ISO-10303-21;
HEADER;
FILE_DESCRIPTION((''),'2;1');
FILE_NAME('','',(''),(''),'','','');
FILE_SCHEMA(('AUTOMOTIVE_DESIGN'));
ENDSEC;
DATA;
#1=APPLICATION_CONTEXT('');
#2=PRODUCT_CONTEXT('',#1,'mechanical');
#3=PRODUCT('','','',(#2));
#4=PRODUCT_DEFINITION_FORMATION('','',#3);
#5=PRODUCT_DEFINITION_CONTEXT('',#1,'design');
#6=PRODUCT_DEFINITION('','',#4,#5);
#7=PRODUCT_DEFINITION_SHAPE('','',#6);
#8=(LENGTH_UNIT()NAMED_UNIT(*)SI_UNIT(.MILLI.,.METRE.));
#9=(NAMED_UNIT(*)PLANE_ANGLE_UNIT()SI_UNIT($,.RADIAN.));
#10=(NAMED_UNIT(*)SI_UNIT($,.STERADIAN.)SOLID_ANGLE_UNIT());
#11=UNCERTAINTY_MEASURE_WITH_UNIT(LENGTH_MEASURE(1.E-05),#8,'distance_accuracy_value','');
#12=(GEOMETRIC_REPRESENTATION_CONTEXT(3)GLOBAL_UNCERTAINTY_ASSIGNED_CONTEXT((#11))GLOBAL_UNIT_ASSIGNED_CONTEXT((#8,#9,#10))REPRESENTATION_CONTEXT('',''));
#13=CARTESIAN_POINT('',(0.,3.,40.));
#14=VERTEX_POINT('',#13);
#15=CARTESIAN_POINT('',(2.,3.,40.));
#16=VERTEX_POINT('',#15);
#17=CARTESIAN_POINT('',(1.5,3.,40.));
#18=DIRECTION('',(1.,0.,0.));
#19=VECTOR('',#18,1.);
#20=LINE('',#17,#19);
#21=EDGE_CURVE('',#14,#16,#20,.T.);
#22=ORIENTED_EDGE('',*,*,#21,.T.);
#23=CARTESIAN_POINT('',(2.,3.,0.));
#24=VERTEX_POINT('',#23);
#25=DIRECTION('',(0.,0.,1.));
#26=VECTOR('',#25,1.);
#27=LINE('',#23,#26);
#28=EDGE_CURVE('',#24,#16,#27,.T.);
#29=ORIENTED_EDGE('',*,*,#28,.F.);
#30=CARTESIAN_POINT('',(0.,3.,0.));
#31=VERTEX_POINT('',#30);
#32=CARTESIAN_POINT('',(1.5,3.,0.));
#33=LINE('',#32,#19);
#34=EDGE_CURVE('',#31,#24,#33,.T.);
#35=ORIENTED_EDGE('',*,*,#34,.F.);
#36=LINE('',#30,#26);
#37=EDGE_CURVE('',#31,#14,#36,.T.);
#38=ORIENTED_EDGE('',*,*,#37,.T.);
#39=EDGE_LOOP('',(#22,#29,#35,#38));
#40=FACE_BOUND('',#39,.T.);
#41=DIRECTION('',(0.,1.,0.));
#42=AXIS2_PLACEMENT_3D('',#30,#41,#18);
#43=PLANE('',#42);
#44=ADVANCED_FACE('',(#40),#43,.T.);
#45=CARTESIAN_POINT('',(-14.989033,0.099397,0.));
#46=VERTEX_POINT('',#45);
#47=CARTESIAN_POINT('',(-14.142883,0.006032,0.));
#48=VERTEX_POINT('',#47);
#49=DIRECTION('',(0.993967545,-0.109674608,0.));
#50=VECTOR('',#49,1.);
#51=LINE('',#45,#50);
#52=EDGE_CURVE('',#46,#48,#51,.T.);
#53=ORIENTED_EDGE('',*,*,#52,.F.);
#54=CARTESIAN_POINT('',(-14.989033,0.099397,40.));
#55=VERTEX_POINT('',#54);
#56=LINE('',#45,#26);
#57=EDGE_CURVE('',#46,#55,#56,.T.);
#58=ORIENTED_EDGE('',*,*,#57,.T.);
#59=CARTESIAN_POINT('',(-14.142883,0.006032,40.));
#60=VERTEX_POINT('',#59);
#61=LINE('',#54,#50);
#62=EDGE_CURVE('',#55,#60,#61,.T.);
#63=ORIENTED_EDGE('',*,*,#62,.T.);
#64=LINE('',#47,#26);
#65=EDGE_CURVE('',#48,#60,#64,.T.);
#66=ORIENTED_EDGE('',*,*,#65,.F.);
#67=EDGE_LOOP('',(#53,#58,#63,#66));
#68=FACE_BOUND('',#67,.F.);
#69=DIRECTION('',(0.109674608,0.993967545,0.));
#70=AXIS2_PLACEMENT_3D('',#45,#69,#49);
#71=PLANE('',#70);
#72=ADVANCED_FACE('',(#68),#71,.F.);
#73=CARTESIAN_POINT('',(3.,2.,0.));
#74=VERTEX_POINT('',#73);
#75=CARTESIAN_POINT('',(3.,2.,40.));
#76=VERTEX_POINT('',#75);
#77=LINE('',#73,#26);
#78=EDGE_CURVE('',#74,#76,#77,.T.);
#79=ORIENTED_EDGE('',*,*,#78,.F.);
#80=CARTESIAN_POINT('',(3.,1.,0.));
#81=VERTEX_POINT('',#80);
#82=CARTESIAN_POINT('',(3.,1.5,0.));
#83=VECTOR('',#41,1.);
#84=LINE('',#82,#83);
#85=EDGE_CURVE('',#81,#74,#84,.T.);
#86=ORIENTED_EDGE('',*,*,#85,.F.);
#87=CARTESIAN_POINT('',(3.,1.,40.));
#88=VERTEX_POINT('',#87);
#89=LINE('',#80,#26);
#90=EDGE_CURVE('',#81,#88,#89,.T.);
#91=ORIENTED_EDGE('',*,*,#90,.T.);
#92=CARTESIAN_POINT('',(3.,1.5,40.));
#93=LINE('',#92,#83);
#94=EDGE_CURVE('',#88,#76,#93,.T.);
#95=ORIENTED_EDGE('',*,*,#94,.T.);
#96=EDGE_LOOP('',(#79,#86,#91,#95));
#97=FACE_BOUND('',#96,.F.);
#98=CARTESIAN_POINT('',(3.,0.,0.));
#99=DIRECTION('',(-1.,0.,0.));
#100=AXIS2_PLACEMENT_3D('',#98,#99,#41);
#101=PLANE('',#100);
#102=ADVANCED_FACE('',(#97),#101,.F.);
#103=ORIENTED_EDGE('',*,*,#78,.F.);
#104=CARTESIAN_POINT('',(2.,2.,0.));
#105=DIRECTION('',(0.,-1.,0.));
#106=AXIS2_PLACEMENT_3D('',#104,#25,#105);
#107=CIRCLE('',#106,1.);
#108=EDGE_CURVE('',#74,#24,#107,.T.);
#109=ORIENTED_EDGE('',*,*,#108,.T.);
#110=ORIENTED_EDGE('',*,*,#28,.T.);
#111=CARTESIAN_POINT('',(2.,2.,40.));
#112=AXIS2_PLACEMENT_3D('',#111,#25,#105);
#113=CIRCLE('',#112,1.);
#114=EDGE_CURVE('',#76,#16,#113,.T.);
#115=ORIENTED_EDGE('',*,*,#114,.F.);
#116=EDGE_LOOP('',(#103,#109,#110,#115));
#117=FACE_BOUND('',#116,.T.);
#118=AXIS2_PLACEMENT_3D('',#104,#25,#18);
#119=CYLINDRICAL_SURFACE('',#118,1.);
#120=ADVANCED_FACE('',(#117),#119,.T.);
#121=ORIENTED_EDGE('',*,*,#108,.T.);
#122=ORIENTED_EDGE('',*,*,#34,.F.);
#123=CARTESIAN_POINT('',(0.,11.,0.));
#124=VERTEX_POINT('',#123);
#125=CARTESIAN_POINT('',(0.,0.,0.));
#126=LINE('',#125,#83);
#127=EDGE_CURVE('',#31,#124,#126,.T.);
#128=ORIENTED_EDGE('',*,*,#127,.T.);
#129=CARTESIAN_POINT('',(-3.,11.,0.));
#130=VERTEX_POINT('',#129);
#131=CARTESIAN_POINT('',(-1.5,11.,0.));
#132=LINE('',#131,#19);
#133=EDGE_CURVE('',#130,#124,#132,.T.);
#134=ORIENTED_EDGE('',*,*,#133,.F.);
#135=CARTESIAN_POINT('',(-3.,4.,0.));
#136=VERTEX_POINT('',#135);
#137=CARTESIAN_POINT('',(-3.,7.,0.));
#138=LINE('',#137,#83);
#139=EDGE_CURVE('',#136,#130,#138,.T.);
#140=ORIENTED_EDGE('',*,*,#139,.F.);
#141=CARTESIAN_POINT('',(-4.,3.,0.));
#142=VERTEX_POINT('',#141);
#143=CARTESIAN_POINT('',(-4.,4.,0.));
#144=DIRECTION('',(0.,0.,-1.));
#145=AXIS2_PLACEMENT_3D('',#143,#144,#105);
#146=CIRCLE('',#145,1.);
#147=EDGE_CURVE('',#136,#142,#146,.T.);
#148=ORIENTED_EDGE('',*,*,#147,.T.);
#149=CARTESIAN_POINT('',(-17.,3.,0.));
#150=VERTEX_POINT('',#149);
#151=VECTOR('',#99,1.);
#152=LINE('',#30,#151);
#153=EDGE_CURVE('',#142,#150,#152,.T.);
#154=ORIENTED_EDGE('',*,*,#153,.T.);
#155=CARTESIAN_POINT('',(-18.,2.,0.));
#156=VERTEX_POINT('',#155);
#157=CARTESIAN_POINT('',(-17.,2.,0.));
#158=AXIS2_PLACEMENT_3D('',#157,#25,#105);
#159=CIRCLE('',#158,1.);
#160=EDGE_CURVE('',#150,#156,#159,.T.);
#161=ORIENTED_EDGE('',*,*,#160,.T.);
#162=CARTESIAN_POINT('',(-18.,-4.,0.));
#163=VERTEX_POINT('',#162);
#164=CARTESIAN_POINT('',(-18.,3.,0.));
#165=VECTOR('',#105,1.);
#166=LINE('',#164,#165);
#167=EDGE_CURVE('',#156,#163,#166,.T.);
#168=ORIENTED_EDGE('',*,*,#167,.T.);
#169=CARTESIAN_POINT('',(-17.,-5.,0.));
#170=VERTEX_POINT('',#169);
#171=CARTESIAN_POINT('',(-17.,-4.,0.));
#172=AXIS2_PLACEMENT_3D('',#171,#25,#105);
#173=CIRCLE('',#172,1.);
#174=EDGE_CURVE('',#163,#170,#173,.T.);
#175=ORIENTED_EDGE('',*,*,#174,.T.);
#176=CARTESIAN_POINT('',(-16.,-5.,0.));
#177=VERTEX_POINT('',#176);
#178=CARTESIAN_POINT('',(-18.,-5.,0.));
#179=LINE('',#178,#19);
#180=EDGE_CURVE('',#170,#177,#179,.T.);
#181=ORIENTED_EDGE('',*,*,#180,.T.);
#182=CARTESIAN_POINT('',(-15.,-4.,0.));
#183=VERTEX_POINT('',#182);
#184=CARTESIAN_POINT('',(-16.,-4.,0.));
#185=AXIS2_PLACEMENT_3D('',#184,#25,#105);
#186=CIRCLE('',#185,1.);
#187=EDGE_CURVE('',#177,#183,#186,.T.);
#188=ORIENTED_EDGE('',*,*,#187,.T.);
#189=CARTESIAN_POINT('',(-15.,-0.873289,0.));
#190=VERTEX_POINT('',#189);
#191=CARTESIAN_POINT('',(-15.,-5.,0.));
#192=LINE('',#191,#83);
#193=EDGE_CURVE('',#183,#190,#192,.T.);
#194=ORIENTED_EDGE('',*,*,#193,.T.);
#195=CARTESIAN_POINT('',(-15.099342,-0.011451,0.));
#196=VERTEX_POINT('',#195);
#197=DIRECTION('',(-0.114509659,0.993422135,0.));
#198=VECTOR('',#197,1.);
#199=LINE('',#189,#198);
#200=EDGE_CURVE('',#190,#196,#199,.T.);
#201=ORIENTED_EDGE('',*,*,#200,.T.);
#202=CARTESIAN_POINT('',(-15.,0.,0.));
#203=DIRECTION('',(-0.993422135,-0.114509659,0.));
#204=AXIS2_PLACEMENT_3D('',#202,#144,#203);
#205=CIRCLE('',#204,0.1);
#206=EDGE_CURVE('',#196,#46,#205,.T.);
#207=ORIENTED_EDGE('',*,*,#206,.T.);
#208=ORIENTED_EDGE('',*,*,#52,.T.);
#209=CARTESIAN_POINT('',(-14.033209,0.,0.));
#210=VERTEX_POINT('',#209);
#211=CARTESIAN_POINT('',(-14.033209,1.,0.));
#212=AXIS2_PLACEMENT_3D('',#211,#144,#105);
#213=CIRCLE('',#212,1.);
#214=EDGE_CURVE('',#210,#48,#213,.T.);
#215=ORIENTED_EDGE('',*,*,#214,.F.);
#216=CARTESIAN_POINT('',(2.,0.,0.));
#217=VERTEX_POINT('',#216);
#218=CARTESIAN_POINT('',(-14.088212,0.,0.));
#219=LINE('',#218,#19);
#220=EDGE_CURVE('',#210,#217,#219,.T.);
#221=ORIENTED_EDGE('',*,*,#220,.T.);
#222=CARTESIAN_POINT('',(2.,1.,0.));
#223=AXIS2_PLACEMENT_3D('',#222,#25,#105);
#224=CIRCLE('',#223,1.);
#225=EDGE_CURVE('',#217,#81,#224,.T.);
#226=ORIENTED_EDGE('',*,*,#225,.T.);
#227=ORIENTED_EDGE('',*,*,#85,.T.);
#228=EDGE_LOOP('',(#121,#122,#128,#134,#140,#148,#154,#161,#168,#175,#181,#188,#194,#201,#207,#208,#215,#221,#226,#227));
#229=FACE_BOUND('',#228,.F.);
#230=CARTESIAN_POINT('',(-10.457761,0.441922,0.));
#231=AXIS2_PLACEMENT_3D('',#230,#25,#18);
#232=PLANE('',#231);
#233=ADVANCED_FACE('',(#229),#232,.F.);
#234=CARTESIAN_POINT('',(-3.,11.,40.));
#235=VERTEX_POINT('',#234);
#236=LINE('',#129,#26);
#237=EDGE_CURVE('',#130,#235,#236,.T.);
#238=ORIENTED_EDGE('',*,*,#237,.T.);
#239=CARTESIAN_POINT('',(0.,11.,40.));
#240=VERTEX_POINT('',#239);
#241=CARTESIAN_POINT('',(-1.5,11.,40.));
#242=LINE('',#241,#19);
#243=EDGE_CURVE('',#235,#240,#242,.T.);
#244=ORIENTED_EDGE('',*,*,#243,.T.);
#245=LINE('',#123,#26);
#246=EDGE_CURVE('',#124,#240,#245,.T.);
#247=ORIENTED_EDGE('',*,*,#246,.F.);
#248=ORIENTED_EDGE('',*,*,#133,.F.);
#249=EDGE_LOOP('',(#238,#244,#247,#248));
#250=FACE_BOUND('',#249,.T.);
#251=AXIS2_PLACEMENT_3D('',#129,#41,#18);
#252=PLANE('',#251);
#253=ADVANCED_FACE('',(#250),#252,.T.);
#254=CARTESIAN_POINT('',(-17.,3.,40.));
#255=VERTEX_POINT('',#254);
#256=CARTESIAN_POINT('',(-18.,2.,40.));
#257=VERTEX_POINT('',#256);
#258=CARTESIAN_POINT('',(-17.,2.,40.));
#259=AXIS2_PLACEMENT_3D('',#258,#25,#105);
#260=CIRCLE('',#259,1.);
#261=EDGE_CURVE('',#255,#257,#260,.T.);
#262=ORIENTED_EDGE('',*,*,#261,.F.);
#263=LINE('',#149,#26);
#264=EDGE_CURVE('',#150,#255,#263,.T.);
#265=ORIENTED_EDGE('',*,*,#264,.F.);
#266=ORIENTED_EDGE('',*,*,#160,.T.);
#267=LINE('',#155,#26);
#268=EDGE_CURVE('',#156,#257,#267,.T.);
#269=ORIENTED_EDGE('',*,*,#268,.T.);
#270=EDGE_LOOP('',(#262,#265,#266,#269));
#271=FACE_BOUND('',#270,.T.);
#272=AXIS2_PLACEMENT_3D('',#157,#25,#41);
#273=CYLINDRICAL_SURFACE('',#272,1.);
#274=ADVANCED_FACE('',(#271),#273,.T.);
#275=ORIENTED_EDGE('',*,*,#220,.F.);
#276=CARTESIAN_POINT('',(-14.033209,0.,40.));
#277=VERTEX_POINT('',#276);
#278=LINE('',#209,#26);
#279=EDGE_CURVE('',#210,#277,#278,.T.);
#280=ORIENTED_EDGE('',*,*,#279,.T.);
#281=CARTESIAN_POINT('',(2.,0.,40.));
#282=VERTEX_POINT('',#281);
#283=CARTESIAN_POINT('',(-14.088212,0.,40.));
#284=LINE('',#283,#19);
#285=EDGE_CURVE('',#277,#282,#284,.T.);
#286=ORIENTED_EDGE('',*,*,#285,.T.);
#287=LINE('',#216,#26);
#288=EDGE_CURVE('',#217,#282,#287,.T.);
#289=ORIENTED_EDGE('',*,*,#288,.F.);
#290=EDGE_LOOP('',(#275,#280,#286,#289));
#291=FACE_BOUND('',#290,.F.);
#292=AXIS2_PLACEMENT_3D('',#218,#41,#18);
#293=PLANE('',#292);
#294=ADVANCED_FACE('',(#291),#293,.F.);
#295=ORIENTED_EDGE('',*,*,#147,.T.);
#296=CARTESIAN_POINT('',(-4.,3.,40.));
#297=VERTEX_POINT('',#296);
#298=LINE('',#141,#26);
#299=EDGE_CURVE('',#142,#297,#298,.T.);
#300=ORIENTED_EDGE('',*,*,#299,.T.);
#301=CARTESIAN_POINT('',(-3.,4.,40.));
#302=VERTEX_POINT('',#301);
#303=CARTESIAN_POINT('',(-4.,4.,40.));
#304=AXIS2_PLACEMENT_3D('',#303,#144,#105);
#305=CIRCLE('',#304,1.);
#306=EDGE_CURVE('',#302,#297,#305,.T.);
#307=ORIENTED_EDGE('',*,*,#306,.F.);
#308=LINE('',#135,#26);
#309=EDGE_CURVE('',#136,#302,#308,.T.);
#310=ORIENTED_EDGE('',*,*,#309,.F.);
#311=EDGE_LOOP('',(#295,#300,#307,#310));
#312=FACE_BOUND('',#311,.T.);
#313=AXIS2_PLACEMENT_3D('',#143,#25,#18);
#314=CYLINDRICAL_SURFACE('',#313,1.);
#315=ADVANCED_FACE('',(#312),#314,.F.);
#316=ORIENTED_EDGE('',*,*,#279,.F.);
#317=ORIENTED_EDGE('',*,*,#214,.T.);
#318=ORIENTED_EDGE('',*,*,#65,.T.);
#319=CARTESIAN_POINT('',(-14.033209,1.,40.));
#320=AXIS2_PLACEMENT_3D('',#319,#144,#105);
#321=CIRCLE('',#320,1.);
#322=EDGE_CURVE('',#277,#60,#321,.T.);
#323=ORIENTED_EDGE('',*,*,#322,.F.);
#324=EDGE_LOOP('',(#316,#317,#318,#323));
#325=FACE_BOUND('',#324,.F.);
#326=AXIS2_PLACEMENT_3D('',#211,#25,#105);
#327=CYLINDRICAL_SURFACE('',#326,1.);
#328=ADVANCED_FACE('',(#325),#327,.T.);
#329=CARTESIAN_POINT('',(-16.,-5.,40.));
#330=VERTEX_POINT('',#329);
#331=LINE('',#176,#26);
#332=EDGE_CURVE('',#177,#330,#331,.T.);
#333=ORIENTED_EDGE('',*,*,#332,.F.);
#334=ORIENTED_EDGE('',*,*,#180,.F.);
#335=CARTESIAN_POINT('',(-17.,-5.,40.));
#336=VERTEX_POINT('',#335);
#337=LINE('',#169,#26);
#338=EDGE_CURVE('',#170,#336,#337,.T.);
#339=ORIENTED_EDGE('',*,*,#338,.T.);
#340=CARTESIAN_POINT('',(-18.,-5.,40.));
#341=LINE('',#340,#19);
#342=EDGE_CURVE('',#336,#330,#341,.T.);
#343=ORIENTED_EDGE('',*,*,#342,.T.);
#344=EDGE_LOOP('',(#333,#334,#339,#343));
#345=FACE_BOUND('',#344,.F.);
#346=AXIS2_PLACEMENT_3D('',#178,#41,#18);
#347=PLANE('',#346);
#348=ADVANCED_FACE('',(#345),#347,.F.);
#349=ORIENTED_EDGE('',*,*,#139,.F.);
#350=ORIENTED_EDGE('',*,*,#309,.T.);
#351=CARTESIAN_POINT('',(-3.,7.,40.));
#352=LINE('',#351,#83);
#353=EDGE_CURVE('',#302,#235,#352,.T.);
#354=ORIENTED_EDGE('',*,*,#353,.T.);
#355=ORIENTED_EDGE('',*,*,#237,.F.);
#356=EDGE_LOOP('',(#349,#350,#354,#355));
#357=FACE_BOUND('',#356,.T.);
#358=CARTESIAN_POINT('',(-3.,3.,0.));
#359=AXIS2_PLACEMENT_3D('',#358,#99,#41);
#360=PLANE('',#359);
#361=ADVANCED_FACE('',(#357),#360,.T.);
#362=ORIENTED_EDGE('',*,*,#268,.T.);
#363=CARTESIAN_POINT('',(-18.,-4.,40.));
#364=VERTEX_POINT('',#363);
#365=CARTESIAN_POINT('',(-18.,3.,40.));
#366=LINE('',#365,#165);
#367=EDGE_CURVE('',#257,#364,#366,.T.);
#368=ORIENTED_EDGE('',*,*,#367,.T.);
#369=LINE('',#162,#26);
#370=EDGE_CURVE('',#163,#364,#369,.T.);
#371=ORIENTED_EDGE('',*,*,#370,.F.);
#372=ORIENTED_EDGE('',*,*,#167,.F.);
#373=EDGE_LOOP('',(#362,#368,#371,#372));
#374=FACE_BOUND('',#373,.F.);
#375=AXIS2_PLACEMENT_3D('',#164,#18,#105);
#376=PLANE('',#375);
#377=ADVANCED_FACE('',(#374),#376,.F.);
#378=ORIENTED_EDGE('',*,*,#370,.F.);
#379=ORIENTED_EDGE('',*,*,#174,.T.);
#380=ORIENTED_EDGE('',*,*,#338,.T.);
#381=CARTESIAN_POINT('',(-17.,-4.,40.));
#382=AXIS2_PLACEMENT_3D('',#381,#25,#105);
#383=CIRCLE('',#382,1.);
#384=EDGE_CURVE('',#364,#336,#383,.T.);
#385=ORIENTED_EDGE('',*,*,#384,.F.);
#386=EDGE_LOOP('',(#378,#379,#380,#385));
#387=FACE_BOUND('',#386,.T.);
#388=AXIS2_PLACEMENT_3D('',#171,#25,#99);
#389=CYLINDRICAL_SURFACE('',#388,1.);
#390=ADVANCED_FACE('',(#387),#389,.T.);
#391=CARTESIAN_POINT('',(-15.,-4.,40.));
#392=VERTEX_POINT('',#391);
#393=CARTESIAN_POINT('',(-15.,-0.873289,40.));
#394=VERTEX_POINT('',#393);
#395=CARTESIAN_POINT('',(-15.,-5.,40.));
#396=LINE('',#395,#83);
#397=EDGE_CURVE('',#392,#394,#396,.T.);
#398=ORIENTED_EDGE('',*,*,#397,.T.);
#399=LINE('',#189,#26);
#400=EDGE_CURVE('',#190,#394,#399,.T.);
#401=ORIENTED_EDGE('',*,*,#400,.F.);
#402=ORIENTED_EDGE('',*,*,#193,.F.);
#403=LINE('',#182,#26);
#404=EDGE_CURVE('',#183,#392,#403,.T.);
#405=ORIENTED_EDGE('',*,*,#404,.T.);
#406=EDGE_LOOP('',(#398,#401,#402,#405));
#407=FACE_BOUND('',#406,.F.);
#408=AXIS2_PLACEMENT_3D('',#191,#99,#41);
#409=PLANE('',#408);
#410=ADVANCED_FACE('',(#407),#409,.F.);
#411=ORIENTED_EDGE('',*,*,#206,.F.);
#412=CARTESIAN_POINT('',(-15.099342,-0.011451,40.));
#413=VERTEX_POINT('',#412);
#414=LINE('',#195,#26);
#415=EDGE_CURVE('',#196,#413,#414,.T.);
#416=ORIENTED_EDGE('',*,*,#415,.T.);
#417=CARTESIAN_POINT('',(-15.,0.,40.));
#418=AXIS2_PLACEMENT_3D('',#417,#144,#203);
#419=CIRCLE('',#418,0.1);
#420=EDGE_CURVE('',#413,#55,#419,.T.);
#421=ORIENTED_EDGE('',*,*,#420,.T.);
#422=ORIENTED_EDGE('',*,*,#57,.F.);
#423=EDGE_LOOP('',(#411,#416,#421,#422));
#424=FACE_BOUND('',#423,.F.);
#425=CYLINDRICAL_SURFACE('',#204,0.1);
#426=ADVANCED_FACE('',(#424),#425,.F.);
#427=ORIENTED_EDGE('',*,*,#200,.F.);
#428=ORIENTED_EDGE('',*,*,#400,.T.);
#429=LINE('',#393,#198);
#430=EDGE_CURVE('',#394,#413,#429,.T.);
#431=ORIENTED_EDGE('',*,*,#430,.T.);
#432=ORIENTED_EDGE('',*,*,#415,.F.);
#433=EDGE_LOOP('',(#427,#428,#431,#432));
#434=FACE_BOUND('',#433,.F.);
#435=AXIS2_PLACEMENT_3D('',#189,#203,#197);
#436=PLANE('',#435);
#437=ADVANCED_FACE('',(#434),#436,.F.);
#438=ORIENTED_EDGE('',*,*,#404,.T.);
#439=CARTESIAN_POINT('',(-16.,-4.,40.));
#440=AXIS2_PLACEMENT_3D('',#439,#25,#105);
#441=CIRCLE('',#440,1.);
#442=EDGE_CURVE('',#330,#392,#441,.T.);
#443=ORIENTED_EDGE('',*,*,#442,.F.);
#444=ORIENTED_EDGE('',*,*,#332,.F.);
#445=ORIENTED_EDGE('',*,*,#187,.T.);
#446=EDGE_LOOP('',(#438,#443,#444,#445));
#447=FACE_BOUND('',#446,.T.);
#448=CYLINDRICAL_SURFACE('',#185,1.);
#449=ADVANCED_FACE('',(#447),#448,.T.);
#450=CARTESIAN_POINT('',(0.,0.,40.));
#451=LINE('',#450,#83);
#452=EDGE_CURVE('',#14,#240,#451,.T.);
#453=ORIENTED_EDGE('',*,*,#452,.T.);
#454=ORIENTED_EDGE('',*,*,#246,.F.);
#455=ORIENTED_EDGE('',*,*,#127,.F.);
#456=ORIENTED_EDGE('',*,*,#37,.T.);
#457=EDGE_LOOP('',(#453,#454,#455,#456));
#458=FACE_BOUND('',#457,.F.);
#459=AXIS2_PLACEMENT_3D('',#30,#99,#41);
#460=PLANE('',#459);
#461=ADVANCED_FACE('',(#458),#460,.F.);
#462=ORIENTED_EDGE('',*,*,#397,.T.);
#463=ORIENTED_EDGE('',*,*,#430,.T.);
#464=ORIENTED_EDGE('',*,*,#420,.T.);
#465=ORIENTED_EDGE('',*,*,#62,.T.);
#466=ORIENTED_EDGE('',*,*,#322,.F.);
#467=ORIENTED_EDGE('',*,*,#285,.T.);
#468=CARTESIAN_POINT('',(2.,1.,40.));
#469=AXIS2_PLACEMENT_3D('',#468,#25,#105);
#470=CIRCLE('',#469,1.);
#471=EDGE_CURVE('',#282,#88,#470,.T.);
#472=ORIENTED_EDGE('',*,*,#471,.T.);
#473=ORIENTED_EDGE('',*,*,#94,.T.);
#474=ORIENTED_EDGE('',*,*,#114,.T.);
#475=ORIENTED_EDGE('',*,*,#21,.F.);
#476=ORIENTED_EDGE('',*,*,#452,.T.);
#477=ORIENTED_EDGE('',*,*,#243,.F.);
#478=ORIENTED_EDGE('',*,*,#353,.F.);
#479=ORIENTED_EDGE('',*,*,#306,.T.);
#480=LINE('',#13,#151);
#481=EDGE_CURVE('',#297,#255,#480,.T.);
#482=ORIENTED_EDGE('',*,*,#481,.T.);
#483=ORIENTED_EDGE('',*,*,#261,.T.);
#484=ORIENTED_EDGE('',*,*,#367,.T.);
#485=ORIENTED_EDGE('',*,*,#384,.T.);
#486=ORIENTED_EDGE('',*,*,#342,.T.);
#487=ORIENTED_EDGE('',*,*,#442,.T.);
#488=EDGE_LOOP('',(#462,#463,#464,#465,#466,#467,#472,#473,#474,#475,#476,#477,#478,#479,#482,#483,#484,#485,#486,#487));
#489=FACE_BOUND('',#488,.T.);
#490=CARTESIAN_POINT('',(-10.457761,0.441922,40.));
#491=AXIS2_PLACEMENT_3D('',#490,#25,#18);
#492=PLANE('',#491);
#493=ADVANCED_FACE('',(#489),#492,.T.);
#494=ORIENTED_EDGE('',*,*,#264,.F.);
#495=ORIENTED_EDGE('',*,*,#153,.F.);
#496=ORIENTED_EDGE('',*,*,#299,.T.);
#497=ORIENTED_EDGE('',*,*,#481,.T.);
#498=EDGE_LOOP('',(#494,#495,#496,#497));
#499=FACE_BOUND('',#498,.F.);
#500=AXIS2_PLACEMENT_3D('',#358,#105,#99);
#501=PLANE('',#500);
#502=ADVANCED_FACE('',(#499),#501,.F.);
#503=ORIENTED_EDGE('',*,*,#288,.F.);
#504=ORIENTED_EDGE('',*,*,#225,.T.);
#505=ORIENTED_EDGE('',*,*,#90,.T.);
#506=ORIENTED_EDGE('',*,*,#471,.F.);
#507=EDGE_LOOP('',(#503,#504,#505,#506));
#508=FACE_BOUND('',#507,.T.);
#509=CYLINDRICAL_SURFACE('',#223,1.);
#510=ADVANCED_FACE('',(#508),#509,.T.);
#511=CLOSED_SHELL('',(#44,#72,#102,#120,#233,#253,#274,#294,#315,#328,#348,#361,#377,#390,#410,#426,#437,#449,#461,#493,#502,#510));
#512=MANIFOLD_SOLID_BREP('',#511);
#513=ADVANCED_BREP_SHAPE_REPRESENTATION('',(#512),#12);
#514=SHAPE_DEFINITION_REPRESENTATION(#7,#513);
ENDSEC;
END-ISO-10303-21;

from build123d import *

# Parameters (mm, degrees)
F0_W     = 3
F0_H     = 8
F0_H_2   = 3
F1_DEPTH = 40
F2_R     = 1


with BuildPart() as f1:
    # F0 (on Top) → F1 (new body)
    with BuildSketch(Plane.XY):
        with BuildLine():
            Line((-14.0882119191, 0), (0, 0))
            Line((0, 0), (0, 3))
            Line((0, 3), (-3, 3))
            Line((-3, 3), (-18, 3))
            Line((-18, 3), (-18, -5))
            Line((-18, -5), (-15, -5))
            Line((-15, -5), (-15, -0.87328878))
            Line((-15, -0.87328878), (-15.0993422135, -0.0114509659))
            ThreePointArc((-15.0993422135, -0.0114509659), (-15.0708824979, 0.0705384398), (-14.9890325392, 0.0993967545))
            Line((-14.9890325392, 0.0993967545), (-14.0882119191, 0))
        make_face()
        with Locations((-1.5, 7)):
            Rectangle(F0_W, F0_H)
        with Locations((1.5, 1.5)):
            Rectangle(F0_W, F0_H_2)
    extrude(amount=F1_DEPTH)

    # F2
    f2_edges = [f1.edges().sort_by_distance(p)[0] for p in [
        (-18, -5, 20),
        (-15, -5, 20),
        (-18, 3, 20),
        (3, 0, 20),
        (3, 3, 20),
        (-3, 3, 20),
        (-14.088212, 0, 20),
    ]]
    fillet(f2_edges, radius=F2_R)


solid = f1.part
